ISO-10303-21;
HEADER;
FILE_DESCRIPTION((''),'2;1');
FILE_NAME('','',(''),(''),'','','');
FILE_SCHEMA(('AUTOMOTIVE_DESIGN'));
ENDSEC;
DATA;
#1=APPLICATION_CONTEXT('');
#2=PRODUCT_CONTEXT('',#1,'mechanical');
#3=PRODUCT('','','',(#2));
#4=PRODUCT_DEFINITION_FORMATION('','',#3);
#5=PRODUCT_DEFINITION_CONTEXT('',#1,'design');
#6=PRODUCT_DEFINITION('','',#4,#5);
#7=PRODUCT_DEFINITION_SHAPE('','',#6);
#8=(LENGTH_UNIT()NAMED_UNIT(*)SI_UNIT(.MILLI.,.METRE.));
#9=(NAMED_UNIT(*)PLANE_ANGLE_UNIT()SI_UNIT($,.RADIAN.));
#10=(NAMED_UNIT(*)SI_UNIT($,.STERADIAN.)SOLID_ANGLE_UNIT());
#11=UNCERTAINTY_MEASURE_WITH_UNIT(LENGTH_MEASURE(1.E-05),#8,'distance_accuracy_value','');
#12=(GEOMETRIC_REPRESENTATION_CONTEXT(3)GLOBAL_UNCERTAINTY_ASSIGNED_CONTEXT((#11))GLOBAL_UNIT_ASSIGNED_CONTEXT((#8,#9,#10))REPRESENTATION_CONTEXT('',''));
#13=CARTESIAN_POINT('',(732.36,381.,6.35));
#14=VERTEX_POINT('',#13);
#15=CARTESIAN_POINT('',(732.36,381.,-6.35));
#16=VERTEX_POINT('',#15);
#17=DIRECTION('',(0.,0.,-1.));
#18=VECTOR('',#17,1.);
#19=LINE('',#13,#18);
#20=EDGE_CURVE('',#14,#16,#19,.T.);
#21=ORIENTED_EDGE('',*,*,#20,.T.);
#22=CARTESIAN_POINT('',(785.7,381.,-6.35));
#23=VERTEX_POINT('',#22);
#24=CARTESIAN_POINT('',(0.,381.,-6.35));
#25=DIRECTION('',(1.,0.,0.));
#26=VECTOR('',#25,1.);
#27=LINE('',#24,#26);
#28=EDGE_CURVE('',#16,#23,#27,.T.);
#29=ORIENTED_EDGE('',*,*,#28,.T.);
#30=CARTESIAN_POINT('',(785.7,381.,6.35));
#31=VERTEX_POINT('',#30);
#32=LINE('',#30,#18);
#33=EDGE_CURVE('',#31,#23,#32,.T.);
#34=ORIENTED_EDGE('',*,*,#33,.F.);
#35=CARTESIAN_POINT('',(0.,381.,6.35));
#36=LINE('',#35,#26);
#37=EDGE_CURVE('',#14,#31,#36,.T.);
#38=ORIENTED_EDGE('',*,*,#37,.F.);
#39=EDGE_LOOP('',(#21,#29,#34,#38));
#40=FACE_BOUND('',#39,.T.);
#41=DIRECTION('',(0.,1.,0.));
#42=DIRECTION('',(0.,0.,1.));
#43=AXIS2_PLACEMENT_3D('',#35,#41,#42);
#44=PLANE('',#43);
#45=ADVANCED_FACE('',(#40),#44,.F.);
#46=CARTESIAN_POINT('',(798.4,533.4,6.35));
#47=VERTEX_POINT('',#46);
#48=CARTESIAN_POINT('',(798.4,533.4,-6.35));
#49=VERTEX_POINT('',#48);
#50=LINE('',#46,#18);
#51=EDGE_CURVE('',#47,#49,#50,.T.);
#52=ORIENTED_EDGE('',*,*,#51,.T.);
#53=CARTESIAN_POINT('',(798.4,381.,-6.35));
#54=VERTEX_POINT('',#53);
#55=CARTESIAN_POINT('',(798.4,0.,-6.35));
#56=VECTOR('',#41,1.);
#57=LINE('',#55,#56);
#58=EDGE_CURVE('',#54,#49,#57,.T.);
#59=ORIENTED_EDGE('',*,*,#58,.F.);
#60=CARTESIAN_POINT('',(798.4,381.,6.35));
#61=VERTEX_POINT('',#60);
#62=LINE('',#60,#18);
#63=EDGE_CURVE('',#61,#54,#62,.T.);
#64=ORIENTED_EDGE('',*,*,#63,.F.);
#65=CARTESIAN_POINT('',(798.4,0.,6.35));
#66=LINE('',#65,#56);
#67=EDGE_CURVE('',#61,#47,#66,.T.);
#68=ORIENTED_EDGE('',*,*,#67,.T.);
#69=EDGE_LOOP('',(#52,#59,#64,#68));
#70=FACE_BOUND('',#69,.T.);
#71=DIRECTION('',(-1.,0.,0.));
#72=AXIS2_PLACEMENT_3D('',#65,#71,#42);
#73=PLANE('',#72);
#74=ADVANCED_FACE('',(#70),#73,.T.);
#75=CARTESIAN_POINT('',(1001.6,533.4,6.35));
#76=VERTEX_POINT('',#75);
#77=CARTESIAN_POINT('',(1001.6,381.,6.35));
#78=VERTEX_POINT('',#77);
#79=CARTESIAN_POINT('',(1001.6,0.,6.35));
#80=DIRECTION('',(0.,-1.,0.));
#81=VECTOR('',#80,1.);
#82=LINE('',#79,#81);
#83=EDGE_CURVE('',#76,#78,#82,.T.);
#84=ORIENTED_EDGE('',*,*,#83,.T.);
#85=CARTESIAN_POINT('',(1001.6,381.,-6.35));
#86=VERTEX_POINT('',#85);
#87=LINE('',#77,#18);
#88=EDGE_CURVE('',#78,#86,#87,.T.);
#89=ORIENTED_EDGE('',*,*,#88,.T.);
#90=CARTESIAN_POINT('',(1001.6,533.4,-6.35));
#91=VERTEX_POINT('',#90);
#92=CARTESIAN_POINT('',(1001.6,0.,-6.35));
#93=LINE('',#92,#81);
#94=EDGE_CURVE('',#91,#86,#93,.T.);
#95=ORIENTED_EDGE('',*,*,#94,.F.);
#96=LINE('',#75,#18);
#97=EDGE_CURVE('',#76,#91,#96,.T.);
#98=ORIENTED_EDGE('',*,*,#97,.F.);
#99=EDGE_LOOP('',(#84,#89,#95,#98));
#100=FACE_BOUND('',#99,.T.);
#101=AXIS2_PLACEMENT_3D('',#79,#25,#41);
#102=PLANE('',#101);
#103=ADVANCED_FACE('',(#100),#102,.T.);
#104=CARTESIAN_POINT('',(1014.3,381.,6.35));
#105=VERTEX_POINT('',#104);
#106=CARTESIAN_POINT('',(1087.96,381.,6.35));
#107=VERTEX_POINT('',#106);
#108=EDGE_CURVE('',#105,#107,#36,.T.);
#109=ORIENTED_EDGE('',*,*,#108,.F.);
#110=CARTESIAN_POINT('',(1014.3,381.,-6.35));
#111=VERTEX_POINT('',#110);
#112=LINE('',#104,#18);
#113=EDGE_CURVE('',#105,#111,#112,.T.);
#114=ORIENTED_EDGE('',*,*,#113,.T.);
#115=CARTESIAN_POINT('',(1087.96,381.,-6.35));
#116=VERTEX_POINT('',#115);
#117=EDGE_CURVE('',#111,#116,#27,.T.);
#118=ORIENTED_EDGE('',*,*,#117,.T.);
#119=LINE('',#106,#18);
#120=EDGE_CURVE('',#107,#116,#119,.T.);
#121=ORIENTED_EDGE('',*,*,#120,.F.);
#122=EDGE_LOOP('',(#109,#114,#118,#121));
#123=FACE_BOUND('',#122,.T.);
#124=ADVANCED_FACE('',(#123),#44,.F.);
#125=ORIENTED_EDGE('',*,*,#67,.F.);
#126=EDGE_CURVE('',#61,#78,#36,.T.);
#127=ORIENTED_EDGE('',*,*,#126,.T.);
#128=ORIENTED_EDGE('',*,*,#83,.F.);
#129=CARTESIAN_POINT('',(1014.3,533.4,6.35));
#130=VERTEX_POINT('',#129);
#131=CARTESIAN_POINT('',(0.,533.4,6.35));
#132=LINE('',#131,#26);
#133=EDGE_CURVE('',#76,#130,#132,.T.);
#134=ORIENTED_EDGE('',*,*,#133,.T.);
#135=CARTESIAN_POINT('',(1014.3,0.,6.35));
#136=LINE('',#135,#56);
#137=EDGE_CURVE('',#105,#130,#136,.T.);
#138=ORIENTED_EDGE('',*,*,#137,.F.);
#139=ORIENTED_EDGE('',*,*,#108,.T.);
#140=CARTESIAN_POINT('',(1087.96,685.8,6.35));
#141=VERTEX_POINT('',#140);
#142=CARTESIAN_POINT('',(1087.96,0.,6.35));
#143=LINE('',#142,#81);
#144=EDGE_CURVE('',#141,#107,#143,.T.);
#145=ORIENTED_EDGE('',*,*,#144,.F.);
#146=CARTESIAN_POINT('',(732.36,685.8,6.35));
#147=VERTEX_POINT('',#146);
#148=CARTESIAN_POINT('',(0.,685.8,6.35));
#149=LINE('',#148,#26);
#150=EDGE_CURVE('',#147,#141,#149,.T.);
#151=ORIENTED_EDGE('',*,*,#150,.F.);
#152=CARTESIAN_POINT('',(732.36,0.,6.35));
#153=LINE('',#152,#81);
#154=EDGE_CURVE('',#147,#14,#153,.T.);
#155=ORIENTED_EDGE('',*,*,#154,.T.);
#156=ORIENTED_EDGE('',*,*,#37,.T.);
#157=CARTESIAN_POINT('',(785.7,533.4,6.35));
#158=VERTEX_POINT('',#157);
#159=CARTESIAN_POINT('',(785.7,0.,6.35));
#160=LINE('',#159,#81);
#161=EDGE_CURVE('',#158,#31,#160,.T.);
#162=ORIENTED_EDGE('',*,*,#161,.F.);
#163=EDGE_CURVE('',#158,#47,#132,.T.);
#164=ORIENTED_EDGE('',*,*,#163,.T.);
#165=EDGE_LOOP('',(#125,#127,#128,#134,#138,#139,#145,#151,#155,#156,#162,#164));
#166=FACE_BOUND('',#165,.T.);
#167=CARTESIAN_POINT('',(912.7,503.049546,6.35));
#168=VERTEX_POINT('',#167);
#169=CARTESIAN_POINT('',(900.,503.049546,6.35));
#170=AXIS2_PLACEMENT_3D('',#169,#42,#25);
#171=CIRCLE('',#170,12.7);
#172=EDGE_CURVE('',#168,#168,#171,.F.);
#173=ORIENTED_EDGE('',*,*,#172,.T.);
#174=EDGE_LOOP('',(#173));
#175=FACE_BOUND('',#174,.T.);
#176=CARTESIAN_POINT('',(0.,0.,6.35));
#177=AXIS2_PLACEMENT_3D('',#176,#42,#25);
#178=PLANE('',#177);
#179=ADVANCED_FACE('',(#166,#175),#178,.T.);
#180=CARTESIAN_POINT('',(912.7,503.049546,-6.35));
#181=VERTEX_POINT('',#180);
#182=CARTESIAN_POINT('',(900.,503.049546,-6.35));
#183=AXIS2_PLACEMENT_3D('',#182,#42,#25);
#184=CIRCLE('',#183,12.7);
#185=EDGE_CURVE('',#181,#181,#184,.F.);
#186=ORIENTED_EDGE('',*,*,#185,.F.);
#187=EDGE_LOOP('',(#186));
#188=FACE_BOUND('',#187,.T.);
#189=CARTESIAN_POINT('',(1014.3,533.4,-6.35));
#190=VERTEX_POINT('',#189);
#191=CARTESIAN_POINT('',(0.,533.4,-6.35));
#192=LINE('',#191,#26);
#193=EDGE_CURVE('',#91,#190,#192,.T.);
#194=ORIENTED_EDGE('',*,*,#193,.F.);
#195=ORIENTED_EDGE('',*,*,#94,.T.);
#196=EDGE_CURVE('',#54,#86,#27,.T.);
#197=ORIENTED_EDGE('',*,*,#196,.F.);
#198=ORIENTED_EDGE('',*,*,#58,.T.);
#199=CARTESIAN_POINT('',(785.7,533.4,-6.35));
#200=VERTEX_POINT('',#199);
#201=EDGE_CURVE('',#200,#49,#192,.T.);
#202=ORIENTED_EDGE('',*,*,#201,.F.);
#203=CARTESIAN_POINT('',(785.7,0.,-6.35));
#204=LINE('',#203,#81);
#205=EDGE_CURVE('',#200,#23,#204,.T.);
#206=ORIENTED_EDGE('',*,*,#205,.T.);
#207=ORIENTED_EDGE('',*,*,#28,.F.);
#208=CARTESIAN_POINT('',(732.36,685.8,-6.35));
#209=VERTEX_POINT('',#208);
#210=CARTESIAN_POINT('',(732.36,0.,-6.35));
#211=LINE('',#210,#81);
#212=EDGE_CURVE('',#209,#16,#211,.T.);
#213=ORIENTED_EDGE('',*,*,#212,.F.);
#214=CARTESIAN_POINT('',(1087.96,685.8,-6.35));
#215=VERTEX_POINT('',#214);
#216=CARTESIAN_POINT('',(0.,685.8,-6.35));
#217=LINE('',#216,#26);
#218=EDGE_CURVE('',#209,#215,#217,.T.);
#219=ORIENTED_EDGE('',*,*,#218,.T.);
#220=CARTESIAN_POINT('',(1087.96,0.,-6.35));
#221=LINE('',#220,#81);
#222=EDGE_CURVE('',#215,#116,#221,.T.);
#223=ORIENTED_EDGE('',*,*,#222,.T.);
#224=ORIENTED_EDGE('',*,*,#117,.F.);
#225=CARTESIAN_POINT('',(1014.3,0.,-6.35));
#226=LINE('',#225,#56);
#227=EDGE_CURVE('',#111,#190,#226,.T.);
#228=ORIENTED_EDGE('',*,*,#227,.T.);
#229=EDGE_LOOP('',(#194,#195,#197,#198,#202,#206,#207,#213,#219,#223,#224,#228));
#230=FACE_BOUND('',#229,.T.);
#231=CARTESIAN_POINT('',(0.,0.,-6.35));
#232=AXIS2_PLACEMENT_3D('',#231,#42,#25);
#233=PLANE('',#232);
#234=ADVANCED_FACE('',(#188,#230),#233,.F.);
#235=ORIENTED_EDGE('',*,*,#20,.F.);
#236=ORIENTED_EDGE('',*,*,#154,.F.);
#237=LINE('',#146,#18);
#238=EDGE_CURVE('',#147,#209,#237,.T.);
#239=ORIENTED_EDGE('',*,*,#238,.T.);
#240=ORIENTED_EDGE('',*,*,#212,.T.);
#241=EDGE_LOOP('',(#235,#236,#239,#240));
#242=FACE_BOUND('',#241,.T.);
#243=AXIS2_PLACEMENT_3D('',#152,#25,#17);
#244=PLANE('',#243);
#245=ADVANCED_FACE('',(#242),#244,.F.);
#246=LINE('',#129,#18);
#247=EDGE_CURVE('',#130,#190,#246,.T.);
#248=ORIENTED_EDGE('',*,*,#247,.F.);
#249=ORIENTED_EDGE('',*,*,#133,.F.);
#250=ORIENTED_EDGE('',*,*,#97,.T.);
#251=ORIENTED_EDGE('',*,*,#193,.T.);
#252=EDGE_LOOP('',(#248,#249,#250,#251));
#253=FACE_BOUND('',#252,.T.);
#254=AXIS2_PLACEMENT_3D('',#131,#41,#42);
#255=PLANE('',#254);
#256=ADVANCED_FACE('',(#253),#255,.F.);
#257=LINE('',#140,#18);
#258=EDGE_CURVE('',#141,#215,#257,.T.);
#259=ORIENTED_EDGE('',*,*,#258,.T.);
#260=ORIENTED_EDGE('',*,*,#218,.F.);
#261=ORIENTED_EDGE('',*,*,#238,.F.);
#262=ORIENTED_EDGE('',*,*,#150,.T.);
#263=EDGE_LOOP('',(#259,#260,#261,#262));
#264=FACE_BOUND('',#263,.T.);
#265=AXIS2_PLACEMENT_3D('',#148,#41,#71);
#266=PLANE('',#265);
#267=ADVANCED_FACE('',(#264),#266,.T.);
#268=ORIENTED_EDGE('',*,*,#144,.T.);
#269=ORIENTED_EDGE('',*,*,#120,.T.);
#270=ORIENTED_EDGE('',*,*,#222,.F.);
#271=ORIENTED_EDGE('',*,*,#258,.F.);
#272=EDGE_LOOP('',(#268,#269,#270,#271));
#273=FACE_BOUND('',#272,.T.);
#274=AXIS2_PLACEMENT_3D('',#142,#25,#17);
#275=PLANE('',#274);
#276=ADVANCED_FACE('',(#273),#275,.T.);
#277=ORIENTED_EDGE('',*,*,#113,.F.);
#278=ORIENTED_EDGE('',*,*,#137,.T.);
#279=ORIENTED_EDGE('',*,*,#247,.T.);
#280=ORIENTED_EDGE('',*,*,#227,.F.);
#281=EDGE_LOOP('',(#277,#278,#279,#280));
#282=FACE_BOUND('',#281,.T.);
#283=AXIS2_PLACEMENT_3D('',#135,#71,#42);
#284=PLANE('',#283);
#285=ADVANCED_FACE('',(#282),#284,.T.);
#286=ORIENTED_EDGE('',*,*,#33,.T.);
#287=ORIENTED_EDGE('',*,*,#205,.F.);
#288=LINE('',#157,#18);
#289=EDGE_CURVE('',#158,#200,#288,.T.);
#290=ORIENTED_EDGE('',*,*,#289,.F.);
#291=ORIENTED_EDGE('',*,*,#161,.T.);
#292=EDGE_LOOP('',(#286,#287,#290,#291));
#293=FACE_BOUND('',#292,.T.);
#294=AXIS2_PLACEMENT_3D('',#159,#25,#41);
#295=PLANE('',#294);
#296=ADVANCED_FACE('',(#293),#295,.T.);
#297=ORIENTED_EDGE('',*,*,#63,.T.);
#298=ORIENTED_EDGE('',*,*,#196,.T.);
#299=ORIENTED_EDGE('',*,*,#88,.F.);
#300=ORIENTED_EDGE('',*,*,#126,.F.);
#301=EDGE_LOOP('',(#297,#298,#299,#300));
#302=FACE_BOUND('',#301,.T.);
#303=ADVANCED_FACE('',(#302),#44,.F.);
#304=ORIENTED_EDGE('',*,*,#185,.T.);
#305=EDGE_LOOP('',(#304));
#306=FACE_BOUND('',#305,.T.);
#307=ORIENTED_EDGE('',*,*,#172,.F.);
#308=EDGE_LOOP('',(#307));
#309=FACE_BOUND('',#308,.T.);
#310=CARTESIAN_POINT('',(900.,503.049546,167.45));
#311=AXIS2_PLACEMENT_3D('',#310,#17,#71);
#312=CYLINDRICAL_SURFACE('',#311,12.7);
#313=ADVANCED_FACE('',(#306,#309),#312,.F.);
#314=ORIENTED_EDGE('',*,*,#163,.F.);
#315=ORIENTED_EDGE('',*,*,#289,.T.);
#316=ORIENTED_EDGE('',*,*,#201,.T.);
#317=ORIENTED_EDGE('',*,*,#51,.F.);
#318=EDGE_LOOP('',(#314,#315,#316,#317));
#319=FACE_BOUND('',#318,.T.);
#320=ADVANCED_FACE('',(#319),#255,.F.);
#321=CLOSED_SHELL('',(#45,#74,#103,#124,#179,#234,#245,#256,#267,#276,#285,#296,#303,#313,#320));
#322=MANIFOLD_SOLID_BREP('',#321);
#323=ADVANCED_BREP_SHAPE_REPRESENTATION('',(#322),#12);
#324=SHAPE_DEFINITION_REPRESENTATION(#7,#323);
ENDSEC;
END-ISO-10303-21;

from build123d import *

# Parameters (mm, degrees)
BOSS_EXTRUDE1_DEPTH = 6.35
CAVITY1_START       = -6.35
CAVITY1_OUTLINE_R   = 12.7
CAVITY1_DEPTH       = 12.7


# Read off the part's stored shape, not the designer's step: Cavity1
with BuildPart() as part:
    # Sketch1 → Boss-Extrude1 (new, symmetric)
    with BuildSketch(Plane.XY):
        Polygon((785.7, 533.4), (785.7, 381), (732.36, 381), (732.36, 685.8), (785.7, 685.8), (1001.6, 685.8), (1087.96, 685.8), (1087.96, 381), (1014.3, 381), (1014.3, 533.4), (1001.6, 533.4), (1001.6, 381), (798.4, 381), (798.4, 533.4), align=None)
    extrude(amount=BOSS_EXTRUDE1_DEPTH, both=True)

    # Cavity1 outline → Cavity1 (cut)
    with BuildSketch(Plane.XY.offset(CAVITY1_START)):
        with Locations((900, 503.049546279)):
            Circle(CAVITY1_OUTLINE_R)
    extrude(amount=CAVITY1_DEPTH, mode=Mode.SUBTRACT)


solid = part.part
